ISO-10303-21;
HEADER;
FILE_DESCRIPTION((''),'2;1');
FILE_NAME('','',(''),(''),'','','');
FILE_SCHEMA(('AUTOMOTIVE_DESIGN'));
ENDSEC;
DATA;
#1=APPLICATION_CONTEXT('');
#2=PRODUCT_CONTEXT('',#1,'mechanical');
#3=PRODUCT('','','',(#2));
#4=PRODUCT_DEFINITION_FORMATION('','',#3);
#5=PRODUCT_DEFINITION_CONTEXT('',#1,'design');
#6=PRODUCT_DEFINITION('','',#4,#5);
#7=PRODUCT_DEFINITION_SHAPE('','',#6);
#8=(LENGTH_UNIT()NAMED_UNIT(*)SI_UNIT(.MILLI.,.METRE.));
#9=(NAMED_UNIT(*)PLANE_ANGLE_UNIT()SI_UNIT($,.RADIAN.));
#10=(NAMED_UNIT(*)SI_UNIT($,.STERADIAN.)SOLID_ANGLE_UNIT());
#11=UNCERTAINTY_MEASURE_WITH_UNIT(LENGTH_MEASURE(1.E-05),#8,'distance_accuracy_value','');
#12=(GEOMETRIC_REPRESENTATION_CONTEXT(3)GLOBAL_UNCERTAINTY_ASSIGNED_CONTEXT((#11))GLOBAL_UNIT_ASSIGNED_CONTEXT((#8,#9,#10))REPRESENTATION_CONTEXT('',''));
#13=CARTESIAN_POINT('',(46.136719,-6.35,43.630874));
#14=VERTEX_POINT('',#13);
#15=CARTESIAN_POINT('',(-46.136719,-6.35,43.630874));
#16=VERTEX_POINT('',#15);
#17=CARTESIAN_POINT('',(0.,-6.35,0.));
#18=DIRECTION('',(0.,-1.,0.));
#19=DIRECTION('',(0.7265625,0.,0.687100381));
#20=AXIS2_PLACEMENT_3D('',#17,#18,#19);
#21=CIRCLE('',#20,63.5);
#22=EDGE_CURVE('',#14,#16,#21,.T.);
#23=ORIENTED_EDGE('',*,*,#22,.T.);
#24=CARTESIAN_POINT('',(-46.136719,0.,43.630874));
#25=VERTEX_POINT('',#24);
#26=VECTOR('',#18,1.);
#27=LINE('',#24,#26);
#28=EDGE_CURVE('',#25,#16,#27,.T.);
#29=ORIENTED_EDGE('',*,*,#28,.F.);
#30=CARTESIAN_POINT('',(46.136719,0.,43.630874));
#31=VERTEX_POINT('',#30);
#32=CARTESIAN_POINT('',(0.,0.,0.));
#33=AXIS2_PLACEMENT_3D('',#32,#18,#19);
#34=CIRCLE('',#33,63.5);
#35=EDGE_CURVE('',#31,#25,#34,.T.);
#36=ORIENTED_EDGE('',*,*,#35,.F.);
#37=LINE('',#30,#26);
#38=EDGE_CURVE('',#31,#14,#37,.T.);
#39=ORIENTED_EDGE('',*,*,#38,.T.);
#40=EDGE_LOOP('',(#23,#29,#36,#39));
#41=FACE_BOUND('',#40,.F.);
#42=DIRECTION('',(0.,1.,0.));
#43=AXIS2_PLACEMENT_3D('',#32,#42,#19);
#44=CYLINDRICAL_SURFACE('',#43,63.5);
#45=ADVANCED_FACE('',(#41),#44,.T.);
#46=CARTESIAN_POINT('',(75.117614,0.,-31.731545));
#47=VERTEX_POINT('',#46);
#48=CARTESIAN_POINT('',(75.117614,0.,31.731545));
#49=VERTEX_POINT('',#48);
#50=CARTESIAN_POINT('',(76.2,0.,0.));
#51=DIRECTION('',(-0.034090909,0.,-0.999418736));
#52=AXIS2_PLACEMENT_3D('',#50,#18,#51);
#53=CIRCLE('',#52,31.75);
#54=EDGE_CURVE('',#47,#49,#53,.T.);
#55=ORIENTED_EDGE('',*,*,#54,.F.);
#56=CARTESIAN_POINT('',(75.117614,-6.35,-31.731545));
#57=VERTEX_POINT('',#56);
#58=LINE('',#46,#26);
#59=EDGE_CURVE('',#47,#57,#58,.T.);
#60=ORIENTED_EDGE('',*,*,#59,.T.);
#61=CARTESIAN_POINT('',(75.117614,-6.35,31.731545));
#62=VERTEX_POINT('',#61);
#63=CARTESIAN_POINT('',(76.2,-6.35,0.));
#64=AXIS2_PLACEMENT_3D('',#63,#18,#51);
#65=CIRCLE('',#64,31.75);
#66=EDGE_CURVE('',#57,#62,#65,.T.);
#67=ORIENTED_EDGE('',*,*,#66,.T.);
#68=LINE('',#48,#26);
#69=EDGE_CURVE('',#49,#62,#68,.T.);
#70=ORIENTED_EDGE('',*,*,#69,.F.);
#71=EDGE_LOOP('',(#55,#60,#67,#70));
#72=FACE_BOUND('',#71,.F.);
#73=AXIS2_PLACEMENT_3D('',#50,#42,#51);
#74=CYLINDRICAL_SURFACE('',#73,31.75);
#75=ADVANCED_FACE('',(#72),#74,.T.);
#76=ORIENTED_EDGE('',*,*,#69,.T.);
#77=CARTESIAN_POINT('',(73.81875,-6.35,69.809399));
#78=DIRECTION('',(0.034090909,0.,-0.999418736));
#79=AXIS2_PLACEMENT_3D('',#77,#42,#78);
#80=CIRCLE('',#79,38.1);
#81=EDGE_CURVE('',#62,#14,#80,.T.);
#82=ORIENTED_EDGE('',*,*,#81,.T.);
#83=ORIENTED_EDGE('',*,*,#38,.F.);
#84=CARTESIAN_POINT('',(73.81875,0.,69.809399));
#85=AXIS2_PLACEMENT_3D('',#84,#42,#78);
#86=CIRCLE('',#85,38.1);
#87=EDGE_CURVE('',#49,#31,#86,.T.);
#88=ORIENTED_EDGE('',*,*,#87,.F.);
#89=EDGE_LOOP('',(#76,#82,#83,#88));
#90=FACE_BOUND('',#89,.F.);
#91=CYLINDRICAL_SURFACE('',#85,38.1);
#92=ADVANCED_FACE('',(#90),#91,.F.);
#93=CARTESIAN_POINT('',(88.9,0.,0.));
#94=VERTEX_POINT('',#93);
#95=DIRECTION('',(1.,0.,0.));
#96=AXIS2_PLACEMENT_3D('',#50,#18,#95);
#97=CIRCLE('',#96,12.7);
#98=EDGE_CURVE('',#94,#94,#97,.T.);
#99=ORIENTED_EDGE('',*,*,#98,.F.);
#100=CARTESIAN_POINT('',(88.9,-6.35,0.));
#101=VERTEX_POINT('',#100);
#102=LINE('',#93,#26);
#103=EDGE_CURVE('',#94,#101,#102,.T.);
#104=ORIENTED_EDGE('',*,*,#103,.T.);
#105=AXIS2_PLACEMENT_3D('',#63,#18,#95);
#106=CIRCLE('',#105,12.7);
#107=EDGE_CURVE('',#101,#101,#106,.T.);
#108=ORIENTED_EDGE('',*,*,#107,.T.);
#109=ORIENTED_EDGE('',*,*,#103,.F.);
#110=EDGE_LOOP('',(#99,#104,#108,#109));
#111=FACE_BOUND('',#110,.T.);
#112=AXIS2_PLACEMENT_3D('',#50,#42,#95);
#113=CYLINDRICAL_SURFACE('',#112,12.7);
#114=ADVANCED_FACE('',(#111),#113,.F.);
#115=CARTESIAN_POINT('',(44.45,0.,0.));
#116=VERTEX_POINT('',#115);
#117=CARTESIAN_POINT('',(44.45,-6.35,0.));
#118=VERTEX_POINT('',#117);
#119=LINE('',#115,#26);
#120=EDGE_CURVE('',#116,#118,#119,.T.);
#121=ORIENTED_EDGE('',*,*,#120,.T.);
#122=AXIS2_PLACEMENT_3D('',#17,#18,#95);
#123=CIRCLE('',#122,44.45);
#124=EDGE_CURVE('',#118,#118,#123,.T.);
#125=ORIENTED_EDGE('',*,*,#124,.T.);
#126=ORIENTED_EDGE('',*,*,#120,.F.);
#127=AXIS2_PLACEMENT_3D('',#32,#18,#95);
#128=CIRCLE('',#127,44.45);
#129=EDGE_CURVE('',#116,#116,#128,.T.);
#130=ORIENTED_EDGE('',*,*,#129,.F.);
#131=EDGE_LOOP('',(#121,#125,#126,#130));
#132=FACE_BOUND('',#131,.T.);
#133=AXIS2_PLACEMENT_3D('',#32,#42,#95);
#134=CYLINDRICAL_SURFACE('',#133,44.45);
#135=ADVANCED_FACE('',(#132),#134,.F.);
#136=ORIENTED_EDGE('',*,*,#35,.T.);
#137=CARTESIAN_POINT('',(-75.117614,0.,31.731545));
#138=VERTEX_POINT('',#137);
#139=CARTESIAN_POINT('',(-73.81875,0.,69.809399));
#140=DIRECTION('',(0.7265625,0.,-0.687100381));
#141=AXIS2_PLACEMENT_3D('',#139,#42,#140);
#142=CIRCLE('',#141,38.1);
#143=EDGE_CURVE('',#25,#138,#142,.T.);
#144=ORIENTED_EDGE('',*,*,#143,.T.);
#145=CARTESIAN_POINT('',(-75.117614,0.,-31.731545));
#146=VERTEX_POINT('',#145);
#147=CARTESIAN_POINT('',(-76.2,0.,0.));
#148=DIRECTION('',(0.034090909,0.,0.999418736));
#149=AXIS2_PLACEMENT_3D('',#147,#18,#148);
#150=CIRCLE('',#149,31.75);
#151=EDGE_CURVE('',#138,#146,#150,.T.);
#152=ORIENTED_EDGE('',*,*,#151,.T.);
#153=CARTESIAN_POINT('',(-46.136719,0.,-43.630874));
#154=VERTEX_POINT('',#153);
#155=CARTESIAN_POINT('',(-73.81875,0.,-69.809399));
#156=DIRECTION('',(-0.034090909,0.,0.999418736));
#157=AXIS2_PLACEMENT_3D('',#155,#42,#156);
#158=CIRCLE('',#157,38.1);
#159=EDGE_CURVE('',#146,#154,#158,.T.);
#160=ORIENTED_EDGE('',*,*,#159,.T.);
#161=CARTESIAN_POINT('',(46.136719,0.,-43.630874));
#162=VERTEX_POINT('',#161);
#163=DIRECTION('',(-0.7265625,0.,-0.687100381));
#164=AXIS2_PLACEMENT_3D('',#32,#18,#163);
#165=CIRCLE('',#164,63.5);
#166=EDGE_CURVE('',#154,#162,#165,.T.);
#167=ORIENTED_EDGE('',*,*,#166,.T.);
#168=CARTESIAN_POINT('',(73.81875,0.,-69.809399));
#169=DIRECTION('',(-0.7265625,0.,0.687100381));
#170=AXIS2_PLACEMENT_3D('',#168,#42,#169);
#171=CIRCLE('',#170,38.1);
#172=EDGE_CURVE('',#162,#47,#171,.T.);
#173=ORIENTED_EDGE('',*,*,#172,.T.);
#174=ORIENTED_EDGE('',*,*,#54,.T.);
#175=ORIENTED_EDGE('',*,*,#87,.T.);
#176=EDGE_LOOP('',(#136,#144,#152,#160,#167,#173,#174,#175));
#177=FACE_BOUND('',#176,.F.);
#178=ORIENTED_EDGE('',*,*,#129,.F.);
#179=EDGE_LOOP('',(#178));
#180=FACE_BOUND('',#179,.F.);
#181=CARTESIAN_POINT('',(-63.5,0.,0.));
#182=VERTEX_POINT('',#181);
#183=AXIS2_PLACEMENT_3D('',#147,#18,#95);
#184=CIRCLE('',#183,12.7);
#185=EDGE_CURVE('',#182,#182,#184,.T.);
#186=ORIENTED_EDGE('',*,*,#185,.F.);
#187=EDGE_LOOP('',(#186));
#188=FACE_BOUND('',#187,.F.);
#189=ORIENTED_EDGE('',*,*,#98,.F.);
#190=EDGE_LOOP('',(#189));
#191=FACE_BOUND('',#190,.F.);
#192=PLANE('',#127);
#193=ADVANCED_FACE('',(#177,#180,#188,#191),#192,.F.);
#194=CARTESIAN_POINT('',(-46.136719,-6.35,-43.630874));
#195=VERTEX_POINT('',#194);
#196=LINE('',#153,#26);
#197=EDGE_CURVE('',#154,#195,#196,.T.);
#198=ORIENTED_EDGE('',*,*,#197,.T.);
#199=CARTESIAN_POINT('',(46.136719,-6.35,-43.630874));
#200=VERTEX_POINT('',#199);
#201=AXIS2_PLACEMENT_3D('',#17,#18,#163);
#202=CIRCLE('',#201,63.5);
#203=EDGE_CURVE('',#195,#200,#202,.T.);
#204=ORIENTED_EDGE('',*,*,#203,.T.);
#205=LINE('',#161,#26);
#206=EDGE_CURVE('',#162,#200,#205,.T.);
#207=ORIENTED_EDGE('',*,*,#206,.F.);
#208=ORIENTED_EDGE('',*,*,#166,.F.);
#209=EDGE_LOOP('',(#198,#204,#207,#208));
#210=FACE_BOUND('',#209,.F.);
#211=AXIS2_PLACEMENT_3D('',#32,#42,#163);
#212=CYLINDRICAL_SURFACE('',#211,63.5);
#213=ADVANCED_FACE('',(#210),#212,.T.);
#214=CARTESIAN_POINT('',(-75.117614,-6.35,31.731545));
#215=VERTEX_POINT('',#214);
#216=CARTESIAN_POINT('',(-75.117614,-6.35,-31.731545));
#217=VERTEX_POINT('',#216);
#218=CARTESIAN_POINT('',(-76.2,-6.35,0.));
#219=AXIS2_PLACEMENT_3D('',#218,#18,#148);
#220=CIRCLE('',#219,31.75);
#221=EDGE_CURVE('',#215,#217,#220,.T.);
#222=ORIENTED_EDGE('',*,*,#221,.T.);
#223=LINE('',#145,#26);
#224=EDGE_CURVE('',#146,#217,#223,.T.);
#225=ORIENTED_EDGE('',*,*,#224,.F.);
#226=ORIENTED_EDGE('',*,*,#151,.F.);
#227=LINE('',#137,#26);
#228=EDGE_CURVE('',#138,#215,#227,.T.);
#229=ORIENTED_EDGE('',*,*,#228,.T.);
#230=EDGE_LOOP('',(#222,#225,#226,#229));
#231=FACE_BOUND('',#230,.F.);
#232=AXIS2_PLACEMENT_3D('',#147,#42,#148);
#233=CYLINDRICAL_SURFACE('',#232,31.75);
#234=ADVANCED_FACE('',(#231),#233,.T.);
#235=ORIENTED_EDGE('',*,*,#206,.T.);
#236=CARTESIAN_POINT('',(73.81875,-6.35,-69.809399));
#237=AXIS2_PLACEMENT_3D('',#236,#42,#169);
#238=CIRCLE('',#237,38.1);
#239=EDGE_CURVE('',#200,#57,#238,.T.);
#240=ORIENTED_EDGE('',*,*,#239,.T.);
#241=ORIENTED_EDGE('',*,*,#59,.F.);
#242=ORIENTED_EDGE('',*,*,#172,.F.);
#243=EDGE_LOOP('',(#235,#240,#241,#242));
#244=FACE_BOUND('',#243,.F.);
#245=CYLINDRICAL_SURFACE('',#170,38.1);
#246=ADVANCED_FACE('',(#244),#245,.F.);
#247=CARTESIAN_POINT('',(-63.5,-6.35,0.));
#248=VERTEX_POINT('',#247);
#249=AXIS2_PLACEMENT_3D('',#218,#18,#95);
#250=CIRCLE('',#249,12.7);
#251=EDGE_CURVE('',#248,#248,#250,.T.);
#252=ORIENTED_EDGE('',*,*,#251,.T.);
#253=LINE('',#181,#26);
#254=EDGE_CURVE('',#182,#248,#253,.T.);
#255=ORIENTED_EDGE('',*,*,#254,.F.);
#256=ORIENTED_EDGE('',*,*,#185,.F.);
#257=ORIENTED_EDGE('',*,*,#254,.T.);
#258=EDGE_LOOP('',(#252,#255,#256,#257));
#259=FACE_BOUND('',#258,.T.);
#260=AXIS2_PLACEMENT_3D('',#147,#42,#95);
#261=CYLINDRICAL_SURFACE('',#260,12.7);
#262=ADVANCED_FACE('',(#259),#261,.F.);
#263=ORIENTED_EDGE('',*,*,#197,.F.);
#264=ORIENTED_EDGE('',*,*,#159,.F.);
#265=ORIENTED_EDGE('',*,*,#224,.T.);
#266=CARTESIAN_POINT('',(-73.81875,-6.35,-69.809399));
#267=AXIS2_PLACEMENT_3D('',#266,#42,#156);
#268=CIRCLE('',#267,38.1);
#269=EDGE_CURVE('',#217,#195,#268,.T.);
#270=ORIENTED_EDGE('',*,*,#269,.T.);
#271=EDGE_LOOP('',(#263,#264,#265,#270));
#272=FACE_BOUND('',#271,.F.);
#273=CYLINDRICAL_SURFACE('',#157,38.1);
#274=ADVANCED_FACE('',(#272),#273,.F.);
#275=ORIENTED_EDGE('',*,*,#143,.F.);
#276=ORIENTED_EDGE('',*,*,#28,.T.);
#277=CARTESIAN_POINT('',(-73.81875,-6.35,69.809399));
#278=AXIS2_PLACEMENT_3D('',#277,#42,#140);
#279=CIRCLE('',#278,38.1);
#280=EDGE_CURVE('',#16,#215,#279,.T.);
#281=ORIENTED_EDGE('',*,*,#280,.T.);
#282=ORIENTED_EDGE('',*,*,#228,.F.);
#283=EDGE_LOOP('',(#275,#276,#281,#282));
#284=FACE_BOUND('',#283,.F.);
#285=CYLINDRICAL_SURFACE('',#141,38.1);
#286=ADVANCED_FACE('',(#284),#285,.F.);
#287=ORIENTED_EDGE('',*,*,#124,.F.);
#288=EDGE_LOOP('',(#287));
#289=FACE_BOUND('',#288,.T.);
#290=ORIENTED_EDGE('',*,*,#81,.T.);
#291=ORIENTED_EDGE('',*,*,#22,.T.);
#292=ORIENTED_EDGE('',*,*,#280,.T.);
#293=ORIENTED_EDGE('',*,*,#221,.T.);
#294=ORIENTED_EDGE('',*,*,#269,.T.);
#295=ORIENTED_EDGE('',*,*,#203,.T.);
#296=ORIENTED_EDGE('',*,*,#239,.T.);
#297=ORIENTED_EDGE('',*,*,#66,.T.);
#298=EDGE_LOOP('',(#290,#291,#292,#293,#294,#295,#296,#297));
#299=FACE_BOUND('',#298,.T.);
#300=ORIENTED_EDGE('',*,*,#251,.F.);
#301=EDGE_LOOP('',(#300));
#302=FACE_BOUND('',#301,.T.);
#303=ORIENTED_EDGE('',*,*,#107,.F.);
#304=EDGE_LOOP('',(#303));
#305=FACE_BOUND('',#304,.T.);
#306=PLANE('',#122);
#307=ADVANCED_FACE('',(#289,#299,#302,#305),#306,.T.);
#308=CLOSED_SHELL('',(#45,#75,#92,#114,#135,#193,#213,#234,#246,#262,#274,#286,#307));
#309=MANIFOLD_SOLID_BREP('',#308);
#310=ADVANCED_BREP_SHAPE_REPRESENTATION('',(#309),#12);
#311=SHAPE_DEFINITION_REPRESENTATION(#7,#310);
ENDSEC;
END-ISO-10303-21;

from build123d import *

# Parameters (mm, degrees)
F0_R     = 12.7
F0_R_2   = 44.45
F1_DEPTH = 6.35


# Not quite as in the source:
# - a length typed as a fraction of an inch, garbled in the dataset ("3 / 203.2 mm" for 3/8 in), is restored


with BuildPart() as f1:
    # F0 (on Front) → F1 (new body)
    with BuildSketch(Plane.XZ):
        with BuildLine():
            ThreePointArc((46.13671875, -43.6308741946), (59.3475236203, -34.5646316236), (75.1176136364, -31.7315448688))
            ThreePointArc((75.1176136364, -31.7315448688), (107.95, 0), (75.1176136364, 31.7315448688))
            ThreePointArc((75.1176136364, 31.7315448688), (59.3475236203, 34.5646316236), (46.13671875, 43.6308741946))
            ThreePointArc((46.13671875, 43.6308741946), (0, 63.5), (-46.13671875, 43.6308741946))
            ThreePointArc((-46.13671875, 43.6308741946), (-59.3475236203, 34.5646316236), (-75.1176136364, 31.7315448688))
            ThreePointArc((-75.1176136364, 31.7315448688), (-107.95, 0), (-75.1176136364, -31.7315448688))
            ThreePointArc((-75.1176136364, -31.7315448688), (-59.3475236203, -34.5646316236), (-46.13671875, -43.6308741946))
            ThreePointArc((-46.13671875, -43.6308741946), (0, -63.5), (46.13671875, -43.6308741946))
        make_face()
        with Locations((-76.2, 0)):
            Circle(F0_R, mode=Mode.SUBTRACT)
        Circle(F0_R_2, mode=Mode.SUBTRACT)
        with Locations((76.2, 0)):
            Circle(F0_R, mode=Mode.SUBTRACT)
    extrude(amount=F1_DEPTH)


solid = f1.part
